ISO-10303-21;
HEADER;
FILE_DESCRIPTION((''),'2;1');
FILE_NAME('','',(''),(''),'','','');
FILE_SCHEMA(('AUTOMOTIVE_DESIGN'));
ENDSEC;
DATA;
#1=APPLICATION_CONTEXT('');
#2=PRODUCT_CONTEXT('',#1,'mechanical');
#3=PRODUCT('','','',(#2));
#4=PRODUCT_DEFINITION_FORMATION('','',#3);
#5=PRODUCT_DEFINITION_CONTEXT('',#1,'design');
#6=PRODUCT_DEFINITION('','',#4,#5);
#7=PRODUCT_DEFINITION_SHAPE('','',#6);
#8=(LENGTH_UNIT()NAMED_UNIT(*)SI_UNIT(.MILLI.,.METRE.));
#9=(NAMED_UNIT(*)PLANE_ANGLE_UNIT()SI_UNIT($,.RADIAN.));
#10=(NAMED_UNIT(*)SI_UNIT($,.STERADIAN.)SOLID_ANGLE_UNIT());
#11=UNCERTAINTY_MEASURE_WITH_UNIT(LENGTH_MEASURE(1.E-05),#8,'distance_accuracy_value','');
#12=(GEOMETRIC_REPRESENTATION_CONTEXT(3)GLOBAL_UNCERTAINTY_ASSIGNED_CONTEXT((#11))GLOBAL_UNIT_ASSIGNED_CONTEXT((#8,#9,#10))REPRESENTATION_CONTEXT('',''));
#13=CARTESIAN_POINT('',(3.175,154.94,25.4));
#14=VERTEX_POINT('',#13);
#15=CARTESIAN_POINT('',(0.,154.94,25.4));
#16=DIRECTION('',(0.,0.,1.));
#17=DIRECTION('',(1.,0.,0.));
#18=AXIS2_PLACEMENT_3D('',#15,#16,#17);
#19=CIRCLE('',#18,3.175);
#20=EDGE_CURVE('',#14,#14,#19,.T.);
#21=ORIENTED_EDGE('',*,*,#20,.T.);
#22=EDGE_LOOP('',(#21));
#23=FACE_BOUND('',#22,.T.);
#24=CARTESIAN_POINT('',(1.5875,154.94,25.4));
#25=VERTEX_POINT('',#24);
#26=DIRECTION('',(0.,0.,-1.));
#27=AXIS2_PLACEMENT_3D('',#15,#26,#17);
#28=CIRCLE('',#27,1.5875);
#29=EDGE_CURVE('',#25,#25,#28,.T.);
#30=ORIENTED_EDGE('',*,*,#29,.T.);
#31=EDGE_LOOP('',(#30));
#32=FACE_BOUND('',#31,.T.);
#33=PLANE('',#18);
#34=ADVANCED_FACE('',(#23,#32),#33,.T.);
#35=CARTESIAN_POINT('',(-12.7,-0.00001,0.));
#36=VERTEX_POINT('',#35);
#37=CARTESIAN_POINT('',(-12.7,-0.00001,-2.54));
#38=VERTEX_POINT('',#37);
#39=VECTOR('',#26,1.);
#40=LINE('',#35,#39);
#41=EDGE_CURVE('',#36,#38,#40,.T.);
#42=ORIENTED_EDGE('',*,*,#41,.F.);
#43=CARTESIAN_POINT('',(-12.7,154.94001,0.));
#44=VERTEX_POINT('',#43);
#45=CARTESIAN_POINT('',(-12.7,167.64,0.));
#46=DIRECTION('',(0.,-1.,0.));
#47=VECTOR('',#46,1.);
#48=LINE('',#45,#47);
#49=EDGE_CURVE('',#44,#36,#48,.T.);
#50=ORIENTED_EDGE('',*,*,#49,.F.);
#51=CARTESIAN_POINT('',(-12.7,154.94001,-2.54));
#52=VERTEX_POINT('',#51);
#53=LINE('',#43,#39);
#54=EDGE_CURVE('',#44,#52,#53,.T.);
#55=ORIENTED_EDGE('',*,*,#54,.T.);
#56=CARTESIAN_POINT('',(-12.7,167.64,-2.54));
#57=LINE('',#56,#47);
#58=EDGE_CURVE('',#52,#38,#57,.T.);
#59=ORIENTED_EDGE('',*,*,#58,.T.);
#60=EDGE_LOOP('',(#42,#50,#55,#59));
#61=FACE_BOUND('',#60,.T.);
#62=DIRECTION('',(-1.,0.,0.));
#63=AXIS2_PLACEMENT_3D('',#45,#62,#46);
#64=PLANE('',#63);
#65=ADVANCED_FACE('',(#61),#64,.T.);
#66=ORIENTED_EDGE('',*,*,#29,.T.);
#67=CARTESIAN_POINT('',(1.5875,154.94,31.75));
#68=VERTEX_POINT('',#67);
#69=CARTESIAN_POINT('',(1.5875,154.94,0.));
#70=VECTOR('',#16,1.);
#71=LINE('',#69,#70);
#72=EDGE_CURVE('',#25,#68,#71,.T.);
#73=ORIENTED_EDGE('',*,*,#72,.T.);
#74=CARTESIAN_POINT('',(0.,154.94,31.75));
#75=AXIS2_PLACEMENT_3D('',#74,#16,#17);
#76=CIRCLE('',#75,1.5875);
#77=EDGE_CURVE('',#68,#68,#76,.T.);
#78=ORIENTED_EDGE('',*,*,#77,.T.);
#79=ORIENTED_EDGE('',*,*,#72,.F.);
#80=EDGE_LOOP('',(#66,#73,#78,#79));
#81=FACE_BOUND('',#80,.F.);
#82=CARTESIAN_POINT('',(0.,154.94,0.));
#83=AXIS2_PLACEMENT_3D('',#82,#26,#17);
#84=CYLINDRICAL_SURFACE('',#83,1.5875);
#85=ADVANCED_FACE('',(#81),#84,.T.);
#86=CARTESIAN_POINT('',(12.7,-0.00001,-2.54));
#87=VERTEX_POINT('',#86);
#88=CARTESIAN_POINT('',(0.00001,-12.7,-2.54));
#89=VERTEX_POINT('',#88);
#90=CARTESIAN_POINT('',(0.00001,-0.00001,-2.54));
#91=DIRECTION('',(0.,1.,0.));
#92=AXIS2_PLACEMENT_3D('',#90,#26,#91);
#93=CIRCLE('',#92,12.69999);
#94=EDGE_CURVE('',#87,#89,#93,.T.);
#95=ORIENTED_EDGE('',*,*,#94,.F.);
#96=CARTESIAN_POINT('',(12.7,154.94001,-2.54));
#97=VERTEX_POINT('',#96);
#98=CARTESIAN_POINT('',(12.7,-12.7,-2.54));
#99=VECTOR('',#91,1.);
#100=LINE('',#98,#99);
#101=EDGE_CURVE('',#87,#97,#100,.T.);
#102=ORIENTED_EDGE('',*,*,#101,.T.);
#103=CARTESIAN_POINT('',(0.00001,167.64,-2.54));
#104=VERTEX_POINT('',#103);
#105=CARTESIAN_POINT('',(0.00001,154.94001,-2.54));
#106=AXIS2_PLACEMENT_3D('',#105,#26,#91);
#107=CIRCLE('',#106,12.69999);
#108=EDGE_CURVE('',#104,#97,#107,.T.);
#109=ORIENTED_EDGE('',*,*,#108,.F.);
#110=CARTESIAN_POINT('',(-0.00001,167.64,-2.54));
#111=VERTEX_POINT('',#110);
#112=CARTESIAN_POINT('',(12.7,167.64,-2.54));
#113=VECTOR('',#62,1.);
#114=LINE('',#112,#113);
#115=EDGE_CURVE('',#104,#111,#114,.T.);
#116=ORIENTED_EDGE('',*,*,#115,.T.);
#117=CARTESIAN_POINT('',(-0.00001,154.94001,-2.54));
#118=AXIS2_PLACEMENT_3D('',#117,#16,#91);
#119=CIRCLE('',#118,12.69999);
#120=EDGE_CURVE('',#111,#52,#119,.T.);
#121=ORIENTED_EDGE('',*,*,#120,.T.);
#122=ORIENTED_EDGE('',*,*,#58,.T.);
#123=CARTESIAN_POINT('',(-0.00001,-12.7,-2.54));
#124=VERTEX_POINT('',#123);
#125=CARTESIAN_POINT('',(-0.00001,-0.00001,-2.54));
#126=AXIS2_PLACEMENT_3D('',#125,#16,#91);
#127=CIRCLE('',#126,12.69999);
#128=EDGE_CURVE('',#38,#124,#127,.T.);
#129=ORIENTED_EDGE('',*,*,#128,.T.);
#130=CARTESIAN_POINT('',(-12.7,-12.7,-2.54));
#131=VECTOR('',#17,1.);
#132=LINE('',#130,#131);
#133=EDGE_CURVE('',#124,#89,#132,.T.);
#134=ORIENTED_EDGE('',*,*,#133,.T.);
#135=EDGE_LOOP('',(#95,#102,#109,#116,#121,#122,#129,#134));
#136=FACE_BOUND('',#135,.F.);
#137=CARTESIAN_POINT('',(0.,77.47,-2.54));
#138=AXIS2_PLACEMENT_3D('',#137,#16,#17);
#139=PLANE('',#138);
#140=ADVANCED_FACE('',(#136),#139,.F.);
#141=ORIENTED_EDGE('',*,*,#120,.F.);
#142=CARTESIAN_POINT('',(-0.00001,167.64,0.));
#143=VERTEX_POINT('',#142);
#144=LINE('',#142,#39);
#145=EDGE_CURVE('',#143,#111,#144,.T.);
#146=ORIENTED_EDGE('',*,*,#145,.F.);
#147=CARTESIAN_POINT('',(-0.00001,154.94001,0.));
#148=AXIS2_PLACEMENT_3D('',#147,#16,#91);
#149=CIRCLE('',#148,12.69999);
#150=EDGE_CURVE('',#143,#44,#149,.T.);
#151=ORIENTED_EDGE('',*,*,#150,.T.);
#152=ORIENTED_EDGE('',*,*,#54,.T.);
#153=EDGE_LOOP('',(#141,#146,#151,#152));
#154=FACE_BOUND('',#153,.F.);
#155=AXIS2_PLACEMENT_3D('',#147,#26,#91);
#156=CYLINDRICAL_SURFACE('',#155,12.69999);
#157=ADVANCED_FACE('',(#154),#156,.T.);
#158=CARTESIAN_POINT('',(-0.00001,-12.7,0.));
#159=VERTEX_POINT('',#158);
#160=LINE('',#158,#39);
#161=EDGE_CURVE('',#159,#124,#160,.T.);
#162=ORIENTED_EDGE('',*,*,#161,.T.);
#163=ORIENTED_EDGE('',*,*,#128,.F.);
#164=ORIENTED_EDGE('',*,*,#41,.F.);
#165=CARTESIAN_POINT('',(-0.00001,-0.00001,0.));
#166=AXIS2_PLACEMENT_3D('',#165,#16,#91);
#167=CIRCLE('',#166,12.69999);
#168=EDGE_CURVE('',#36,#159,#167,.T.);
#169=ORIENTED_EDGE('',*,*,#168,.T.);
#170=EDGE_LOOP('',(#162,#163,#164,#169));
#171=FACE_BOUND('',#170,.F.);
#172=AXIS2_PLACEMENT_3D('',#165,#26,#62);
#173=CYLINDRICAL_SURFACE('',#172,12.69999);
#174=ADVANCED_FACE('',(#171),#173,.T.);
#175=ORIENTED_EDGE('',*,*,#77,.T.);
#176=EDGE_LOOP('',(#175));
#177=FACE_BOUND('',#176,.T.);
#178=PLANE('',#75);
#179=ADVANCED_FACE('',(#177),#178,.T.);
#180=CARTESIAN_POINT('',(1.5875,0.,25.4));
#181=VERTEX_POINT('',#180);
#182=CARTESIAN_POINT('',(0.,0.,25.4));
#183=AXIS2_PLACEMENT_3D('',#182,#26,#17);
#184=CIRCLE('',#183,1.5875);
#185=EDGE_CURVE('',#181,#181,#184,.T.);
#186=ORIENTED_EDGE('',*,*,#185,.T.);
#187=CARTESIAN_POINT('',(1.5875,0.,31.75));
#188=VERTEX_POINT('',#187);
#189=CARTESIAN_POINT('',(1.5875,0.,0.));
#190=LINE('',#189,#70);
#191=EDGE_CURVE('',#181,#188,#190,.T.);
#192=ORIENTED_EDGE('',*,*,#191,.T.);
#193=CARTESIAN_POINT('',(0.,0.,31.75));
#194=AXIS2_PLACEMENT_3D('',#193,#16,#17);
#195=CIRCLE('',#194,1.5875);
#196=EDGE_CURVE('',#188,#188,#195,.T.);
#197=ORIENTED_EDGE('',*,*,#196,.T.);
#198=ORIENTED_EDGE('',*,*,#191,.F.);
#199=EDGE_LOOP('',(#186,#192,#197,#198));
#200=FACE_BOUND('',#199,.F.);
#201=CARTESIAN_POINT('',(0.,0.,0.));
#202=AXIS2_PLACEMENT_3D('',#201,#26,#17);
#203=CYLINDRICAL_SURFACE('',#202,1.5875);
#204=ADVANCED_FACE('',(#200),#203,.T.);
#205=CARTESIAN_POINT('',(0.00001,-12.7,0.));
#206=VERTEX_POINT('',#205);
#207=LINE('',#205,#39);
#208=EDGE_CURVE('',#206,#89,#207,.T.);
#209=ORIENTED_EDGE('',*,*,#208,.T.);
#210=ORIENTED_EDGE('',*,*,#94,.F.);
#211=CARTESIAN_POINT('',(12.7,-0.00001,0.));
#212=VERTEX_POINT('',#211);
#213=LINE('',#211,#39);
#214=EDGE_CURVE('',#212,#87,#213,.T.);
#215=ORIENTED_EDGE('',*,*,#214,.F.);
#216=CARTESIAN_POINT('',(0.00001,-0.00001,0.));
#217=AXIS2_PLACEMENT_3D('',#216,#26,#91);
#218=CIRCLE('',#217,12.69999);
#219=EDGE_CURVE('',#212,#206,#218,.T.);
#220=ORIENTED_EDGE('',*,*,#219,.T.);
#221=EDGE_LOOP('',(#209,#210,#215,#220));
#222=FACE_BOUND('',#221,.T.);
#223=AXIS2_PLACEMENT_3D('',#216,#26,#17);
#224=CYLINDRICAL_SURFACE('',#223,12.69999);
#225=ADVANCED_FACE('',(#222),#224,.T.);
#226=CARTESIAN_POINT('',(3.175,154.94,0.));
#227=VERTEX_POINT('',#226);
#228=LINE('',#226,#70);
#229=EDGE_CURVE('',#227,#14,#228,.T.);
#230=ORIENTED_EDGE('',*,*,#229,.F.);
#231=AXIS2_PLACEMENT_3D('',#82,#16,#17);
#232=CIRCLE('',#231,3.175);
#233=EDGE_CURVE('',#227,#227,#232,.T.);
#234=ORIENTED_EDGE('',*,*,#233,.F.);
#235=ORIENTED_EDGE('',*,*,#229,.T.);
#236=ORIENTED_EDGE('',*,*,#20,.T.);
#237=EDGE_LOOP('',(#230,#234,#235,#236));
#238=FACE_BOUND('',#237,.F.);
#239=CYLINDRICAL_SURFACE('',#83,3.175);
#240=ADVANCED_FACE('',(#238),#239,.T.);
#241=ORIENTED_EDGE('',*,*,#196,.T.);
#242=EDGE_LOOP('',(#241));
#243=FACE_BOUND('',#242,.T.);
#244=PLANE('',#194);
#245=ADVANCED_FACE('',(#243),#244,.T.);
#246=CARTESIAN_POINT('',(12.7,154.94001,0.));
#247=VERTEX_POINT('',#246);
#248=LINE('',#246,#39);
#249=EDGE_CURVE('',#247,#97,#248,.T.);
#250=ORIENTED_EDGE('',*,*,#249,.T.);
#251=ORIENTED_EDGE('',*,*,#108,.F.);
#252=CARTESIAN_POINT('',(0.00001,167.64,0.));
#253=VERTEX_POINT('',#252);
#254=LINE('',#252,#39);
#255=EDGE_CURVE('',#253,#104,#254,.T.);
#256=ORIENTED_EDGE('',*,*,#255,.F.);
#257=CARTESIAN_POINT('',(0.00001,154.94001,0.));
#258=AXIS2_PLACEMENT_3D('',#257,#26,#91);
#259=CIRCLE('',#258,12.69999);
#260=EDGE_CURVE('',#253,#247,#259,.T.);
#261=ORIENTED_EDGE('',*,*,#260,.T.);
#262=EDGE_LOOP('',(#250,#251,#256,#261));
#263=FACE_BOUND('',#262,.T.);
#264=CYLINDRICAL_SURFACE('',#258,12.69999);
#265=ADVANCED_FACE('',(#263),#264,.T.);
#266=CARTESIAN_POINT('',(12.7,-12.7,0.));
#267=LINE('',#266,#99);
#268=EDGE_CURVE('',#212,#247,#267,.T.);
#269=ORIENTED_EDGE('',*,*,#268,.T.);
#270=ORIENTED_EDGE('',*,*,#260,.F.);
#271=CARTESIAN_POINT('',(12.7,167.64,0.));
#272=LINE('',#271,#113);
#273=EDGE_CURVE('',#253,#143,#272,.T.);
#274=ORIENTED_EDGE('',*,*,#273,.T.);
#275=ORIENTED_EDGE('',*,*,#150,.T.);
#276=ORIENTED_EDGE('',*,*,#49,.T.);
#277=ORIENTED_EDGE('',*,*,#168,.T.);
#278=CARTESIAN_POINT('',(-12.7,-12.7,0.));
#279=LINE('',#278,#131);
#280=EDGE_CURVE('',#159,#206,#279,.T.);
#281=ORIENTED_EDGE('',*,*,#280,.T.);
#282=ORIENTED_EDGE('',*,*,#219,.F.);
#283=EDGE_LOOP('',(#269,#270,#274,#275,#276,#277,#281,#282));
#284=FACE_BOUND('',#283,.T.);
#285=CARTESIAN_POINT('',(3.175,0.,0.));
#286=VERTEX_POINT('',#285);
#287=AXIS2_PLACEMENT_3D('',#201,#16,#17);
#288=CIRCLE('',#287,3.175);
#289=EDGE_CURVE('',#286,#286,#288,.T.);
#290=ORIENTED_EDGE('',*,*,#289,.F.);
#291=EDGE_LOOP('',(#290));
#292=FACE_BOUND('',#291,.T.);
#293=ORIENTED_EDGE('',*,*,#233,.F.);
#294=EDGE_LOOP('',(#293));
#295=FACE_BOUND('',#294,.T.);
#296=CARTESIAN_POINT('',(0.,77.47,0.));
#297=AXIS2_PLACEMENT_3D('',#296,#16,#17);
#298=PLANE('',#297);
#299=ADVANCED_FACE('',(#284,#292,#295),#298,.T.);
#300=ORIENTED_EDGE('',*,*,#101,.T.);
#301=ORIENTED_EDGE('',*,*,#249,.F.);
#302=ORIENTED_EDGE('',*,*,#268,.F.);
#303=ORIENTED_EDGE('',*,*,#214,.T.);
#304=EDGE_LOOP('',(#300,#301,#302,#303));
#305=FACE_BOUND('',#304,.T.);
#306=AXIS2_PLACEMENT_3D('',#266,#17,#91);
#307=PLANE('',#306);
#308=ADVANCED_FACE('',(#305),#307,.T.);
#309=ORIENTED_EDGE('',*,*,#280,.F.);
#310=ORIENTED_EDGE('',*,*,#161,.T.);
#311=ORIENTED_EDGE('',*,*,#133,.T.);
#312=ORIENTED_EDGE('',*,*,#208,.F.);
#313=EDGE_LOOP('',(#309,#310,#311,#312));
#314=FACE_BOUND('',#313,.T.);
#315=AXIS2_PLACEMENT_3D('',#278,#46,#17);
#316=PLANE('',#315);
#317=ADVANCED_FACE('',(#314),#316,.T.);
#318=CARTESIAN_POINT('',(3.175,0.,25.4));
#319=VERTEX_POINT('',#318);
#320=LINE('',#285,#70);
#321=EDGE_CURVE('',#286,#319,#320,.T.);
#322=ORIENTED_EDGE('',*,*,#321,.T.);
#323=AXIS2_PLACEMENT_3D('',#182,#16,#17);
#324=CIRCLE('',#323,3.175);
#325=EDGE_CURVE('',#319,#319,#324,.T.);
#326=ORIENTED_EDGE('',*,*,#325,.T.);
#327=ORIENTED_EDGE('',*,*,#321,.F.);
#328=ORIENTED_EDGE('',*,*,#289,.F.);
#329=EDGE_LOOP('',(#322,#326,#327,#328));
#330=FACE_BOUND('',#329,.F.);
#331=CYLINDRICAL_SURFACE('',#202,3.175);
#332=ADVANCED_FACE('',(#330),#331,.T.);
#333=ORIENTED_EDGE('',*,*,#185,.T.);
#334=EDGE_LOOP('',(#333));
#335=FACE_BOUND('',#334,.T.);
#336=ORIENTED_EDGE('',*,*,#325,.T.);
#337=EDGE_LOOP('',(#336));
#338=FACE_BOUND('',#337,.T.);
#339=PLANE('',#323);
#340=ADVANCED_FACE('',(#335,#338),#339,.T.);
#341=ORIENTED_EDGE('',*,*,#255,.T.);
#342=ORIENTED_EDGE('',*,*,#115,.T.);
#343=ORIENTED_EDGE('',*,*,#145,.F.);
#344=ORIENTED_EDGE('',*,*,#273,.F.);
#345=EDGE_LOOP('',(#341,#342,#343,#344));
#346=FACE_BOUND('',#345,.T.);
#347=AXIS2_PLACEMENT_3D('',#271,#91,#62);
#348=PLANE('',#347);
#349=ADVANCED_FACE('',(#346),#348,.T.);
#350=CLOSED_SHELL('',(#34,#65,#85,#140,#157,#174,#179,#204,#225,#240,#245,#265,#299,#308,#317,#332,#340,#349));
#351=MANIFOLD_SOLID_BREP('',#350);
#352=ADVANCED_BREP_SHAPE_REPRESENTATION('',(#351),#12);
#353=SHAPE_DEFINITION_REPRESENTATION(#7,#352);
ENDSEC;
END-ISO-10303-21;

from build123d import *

# Parameters (mm, degrees)
F0_R     = 3.175
F0_R_2   = 1.5875
F1_DEPTH = 2.54
F2_DEPTH = 25.4
F3_R     = 12.69999
F4_DEPTH = 31.75


# Not quite as in the source:
# - a fillet or chamfer is up to 0.001 mm smaller than in the source, because OpenCascade refuses the exact size


with BuildPart() as f1:
    # F0 (on Top) → F1 (new body)
    with BuildSketch(Plane.XY):
        Polygon((12.7, 167.64), (0, 167.64), (-12.7, 167.64), (-12.7, -12.7), (0, -12.7), (12.7, -12.7), align=None)
        Circle(F0_R, mode=Mode.SUBTRACT)
        with Locations((0, 154.94)):
            Circle(F0_R, mode=Mode.SUBTRACT)
        with Locations((0, 154.94)):
            Circle(F0_R)
        with Locations((0, 154.94)):
            Circle(F0_R_2, mode=Mode.SUBTRACT)
        with Locations((0, 154.94)):
            Circle(F0_R_2)
        Circle(F0_R)
        Circle(F0_R_2, mode=Mode.SUBTRACT)
        Circle(F0_R_2)
    extrude(amount=-F1_DEPTH)

    # F0 (on Top) → F2 (join)
    with BuildSketch(Plane.XY):
        with Locations((0, 154.94)):
            Circle(F0_R)
        with Locations((0, 154.94)):
            Circle(F0_R_2, mode=Mode.SUBTRACT)
        Circle(F0_R)
        Circle(F0_R_2, mode=Mode.SUBTRACT)
        with Locations((0, 154.94)):
            Circle(F0_R_2)
        Circle(F0_R_2)
    extrude(amount=F2_DEPTH)

    # F3 (radius 12.7 in the source; OpenCascade refuses exactly that, so slightly less here)
    f3_edges = [f1.edges().sort_by_distance(p)[0] for p in [
        (12.7, 167.64, -1.27),
        (-12.7, 167.64, -1.27),
        (-12.7, -12.7, -1.27),
        (12.7, -12.7, -1.27),
    ]]
    fillet(f3_edges, radius=F3_R)

    # F0 (on Top) → F4 (join)
    with BuildSketch(Plane.XY):
        Circle(F0_R_2)
        with Locations((0, 154.94)):
            Circle(F0_R_2)
    extrude(amount=F4_DEPTH)


solid = f1.part
